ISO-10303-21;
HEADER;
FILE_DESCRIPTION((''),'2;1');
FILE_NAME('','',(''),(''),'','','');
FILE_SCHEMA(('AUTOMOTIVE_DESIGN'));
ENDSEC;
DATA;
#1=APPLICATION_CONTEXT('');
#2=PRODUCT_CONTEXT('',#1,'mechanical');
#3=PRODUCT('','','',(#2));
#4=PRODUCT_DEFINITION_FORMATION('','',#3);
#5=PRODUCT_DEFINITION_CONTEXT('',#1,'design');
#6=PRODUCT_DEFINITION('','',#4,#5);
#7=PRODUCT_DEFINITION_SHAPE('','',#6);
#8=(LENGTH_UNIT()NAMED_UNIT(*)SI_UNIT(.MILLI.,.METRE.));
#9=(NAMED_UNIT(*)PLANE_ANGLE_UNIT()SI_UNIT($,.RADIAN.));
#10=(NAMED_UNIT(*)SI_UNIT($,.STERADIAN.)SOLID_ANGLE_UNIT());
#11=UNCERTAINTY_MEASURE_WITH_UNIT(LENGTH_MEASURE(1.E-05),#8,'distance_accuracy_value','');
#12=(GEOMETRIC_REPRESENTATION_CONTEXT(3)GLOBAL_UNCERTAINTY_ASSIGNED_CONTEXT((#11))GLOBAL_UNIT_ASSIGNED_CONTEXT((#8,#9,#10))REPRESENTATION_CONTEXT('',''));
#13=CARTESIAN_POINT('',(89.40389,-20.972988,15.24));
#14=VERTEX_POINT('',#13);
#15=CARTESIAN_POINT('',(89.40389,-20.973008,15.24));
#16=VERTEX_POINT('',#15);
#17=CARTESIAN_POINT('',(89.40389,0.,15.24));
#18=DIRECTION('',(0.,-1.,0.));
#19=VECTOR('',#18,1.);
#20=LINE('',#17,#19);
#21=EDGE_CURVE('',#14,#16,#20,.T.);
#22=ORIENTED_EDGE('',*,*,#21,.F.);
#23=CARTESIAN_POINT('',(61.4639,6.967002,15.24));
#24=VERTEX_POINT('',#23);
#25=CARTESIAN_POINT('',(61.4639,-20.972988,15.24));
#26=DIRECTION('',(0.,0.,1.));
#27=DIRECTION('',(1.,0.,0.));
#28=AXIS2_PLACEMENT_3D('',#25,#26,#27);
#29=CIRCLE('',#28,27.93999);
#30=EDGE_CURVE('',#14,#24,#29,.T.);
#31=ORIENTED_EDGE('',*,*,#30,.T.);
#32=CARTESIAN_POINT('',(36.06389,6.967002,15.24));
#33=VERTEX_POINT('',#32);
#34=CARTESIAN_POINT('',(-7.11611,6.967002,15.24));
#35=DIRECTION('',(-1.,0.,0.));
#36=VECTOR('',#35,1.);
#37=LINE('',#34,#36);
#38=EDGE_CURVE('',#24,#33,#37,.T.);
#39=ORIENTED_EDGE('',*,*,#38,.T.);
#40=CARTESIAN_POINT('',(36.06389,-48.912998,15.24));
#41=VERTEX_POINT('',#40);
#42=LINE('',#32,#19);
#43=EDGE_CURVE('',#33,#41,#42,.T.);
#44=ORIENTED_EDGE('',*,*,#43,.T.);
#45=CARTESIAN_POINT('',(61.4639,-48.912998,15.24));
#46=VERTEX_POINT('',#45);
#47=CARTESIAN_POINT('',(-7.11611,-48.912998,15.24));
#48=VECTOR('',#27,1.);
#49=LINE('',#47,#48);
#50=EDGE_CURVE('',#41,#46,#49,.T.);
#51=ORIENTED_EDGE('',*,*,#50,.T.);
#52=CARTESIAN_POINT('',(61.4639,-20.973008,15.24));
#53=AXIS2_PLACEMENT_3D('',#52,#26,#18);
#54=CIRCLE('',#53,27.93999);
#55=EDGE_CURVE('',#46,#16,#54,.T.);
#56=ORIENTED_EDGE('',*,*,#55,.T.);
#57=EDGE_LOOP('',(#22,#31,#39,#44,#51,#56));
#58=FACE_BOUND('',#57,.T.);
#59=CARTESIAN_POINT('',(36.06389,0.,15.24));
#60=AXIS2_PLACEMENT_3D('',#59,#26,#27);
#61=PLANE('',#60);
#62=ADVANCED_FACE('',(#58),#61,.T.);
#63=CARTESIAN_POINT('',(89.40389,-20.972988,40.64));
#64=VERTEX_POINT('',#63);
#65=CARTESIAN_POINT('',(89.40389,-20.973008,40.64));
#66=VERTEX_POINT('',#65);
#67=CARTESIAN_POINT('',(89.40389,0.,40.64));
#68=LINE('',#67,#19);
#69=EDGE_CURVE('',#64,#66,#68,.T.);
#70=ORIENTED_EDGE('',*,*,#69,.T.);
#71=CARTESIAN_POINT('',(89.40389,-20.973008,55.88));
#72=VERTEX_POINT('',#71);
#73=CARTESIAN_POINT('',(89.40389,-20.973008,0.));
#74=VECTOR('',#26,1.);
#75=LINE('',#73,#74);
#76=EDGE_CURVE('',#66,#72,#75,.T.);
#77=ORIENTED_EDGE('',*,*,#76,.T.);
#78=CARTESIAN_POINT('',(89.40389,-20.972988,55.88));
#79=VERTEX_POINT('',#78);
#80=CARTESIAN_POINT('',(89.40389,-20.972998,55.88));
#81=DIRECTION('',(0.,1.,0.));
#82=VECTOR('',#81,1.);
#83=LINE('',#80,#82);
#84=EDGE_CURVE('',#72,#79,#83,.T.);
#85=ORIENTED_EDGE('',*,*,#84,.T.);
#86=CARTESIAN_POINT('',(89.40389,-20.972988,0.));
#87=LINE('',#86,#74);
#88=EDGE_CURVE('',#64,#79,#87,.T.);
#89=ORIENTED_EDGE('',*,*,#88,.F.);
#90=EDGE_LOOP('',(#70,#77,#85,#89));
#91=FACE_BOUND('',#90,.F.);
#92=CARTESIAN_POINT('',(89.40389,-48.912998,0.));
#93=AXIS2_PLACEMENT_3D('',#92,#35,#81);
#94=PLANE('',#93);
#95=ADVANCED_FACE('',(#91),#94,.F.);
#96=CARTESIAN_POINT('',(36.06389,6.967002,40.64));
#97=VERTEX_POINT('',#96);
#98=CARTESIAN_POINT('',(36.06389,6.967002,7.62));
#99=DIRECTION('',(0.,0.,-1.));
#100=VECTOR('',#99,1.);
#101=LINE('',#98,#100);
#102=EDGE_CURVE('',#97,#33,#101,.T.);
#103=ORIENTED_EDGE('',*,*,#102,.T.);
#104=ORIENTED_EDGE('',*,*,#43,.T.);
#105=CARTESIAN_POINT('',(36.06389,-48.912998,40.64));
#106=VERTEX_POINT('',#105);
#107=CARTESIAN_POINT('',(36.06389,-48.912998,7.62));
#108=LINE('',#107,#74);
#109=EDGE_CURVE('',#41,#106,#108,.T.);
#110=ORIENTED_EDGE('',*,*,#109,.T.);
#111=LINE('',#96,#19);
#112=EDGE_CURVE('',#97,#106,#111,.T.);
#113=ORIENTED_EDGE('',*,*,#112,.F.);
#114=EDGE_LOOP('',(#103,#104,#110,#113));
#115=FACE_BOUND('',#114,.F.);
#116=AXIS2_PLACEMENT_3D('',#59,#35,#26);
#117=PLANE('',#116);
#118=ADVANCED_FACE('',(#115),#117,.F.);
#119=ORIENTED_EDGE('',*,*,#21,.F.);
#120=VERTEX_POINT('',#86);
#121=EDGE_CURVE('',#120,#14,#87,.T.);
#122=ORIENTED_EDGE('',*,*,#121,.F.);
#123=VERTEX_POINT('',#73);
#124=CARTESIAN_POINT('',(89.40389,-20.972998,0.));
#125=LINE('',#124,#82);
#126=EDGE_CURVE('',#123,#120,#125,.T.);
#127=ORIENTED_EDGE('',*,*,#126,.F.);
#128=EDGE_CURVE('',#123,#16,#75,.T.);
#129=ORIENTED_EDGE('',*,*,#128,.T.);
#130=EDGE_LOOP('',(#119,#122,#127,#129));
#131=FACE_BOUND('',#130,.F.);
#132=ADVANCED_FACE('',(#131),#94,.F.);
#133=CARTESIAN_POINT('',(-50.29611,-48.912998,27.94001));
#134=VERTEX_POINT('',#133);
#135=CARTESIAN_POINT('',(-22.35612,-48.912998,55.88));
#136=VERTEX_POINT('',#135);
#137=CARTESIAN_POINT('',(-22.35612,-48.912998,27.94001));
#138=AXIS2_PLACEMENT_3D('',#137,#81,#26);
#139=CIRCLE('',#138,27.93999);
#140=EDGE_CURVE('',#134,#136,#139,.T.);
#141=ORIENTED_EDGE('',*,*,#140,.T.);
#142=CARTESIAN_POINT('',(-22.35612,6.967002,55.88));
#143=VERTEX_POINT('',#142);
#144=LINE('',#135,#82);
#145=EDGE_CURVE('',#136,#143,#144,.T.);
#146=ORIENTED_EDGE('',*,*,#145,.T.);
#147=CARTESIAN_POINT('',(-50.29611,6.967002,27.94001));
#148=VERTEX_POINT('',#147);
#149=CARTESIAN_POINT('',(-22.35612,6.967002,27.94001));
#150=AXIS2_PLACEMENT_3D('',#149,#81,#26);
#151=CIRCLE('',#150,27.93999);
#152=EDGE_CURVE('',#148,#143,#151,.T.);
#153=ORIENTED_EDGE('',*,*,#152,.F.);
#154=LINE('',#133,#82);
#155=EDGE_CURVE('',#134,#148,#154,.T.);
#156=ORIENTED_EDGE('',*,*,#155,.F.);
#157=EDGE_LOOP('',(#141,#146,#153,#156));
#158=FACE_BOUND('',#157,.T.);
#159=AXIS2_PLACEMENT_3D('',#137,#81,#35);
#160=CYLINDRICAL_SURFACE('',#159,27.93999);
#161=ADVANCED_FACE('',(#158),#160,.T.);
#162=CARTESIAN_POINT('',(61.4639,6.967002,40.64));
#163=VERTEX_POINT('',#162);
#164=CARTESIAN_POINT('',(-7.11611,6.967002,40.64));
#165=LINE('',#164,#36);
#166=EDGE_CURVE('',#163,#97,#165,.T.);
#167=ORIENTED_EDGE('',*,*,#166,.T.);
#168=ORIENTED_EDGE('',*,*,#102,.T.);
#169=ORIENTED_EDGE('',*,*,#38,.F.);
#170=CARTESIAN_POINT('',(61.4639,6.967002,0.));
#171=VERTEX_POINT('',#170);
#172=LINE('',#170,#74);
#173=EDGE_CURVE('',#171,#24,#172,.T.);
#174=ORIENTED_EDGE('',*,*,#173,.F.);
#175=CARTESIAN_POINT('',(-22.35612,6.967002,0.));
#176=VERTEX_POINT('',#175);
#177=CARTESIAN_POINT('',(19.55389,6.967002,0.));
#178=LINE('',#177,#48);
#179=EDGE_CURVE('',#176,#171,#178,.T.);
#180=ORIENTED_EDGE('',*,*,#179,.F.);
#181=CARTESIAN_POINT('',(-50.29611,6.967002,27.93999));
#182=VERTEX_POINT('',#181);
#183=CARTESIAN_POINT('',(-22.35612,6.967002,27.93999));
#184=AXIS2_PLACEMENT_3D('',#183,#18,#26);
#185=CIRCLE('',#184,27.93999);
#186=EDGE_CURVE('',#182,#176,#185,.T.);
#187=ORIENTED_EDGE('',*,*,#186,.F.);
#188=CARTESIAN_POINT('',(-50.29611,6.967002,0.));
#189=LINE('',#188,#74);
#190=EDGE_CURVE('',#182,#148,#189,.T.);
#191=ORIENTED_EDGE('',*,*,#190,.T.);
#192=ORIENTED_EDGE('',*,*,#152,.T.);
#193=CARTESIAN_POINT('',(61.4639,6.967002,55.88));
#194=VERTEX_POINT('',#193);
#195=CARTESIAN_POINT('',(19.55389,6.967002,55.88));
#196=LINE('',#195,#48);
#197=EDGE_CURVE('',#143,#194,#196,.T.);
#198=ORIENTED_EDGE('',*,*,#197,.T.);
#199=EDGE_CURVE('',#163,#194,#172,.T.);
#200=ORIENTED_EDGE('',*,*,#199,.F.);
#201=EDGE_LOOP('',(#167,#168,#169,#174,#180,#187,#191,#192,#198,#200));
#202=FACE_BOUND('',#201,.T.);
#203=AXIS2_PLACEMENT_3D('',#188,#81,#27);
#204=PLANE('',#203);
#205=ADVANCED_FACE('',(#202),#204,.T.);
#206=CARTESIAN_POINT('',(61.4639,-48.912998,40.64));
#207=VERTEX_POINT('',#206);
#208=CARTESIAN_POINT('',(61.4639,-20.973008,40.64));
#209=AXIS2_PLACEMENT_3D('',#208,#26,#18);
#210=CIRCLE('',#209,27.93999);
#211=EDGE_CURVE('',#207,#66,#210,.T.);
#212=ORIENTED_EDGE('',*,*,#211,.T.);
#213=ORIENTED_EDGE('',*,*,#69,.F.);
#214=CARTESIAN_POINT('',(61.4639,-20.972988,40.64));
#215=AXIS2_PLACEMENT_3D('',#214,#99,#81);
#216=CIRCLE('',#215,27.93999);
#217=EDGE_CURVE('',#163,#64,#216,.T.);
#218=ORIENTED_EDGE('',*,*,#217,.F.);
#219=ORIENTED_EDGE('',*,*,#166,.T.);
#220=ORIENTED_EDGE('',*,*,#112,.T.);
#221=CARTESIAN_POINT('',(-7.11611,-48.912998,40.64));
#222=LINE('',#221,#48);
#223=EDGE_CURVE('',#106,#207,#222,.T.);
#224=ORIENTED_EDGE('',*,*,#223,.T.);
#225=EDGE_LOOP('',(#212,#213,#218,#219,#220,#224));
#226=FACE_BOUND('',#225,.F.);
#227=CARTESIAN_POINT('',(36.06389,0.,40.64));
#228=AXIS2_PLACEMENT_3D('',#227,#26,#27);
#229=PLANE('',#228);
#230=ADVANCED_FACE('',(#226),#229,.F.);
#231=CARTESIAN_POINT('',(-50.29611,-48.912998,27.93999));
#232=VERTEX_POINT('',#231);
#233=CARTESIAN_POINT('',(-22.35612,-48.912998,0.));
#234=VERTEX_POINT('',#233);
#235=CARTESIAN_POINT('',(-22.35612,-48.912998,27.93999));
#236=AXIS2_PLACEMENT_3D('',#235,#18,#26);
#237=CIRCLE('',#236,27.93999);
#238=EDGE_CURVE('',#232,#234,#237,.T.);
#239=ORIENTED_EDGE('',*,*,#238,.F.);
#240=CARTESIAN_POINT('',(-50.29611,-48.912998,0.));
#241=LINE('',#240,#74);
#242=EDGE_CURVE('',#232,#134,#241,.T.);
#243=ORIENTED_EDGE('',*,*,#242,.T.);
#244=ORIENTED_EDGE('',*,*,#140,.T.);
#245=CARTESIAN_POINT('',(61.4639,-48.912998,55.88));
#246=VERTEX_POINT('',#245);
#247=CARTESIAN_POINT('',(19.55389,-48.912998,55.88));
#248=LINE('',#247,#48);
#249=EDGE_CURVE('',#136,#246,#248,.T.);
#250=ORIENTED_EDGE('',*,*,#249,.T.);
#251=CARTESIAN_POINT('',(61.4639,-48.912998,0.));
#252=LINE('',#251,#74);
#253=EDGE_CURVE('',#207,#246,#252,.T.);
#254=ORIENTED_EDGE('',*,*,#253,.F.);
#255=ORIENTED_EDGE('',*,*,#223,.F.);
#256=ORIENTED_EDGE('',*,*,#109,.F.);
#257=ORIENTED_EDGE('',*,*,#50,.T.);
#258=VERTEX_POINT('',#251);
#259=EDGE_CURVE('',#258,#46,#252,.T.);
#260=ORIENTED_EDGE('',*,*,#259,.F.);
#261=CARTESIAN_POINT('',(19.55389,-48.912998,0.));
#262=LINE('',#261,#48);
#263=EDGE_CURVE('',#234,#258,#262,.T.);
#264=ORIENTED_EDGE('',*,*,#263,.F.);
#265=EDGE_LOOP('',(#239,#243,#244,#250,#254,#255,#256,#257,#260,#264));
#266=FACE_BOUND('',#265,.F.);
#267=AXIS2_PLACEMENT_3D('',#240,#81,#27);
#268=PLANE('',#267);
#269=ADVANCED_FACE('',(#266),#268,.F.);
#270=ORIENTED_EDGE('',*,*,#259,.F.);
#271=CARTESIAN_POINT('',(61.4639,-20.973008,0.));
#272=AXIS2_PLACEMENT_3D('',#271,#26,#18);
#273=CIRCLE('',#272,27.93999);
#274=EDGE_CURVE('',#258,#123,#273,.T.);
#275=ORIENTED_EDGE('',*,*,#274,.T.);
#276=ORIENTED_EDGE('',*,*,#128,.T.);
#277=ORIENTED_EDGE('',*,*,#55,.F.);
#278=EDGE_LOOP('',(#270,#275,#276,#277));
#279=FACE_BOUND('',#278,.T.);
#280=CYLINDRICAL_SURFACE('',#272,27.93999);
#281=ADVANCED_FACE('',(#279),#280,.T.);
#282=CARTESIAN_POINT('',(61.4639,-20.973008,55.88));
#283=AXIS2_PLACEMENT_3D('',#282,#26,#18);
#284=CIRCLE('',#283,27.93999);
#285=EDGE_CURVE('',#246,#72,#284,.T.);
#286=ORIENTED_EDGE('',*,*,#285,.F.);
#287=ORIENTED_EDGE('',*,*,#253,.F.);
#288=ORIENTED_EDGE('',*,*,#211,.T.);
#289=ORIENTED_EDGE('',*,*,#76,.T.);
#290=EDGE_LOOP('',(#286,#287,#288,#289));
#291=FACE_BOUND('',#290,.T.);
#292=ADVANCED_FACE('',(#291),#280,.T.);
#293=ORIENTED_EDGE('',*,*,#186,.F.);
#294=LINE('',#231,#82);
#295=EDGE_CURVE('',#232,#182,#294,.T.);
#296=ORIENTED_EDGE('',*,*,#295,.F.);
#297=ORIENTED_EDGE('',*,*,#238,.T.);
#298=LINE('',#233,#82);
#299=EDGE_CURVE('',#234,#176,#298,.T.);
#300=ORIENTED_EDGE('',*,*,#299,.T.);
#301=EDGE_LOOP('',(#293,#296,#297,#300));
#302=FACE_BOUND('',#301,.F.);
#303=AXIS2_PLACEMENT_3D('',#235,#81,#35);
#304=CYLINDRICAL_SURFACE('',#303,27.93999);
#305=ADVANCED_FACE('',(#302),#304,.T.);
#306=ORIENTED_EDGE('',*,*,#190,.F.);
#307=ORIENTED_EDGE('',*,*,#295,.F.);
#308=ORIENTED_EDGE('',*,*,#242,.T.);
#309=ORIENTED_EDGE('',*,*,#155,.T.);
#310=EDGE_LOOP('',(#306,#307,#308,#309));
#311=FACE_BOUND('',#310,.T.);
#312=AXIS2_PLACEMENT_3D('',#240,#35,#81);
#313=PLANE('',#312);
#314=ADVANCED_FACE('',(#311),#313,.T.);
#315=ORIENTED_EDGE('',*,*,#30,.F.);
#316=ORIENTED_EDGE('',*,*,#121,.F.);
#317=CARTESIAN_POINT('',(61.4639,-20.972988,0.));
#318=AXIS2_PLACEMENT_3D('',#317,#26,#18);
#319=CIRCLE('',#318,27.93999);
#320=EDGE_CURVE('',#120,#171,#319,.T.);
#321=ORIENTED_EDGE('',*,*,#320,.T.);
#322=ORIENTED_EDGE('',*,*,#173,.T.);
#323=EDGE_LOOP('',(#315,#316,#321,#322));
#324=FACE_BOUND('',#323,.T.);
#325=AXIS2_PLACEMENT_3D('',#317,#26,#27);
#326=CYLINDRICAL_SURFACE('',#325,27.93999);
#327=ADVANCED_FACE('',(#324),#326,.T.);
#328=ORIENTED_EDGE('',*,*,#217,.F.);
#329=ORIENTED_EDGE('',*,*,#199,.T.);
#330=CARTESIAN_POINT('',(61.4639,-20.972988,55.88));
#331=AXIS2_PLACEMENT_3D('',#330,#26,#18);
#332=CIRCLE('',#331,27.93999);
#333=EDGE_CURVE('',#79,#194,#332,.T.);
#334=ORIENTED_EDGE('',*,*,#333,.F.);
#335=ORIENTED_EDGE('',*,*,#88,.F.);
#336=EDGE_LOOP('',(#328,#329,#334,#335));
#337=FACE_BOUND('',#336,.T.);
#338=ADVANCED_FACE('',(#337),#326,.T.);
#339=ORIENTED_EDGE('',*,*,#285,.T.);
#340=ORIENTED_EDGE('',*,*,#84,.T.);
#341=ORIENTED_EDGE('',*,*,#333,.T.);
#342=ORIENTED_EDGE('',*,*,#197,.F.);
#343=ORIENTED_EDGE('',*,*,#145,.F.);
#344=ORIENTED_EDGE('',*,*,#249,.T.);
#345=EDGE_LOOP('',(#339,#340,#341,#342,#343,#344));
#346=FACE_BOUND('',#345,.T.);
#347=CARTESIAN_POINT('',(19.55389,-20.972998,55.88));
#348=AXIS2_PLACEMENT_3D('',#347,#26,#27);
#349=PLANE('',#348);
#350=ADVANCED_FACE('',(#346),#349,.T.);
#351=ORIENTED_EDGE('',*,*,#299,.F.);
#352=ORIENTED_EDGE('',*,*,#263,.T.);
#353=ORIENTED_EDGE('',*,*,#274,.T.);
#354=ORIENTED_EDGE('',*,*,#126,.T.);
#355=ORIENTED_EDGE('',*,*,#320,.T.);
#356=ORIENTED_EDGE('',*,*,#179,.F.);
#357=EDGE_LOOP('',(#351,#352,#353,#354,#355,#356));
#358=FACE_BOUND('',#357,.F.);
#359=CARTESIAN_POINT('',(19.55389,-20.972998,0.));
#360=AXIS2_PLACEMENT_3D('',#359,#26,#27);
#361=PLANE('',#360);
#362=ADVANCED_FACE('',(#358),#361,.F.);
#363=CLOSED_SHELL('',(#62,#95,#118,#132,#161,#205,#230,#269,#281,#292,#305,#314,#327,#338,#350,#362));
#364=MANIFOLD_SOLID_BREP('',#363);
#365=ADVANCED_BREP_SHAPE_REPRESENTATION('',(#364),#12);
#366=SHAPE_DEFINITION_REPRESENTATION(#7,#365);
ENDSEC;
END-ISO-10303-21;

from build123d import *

# Parameters (mm, degrees)
F0_W          = 139.7
F0_H          = 55.88
F1_DEPTH      = 55.88
F2_R          = 27.93999
F3_W          = 53.34
F3_H          = 25.4
F4_DEPTH      = 6.9680017111
F4_DEPTH_BACK = 48.9139982889


# Not quite as in the source:
# - a fillet or chamfer is up to 0.001 mm smaller than in the source, because OpenCascade refuses the exact size


with BuildPart() as f1:
    # F0 (on Top) → F1 (new body)
    with BuildSketch(Plane.XY):
        with Locations((19.5538900733, -20.9729982889)):
            Rectangle(F0_W, F0_H)
    extrude(amount=F1_DEPTH)

    # F2 (radius 27.94 in the source; OpenCascade refuses exactly that, so slightly less here)
    f2_edges = [f1.edges().sort_by_distance(p)[0] for p in [
        (-50.29611, -20.972998, 0),
        (-50.29611, -20.972998, 55.88),
        (89.40389, -48.912998, 27.94),
        (89.40389, 6.967002, 27.94),
    ]]
    fillet(f2_edges, radius=F2_R)

    # F3 (on Front) → F4 (cut, two sides)
    with BuildSketch(Plane.XZ) as f4_sk:
        with Locations((62.7338900733, 27.94)):
            Rectangle(F3_W, F3_H)
    extrude(amount=-F4_DEPTH, mode=Mode.SUBTRACT)
    extrude(f4_sk.sketch, amount=F4_DEPTH_BACK, mode=Mode.SUBTRACT)


solid = f1.part
